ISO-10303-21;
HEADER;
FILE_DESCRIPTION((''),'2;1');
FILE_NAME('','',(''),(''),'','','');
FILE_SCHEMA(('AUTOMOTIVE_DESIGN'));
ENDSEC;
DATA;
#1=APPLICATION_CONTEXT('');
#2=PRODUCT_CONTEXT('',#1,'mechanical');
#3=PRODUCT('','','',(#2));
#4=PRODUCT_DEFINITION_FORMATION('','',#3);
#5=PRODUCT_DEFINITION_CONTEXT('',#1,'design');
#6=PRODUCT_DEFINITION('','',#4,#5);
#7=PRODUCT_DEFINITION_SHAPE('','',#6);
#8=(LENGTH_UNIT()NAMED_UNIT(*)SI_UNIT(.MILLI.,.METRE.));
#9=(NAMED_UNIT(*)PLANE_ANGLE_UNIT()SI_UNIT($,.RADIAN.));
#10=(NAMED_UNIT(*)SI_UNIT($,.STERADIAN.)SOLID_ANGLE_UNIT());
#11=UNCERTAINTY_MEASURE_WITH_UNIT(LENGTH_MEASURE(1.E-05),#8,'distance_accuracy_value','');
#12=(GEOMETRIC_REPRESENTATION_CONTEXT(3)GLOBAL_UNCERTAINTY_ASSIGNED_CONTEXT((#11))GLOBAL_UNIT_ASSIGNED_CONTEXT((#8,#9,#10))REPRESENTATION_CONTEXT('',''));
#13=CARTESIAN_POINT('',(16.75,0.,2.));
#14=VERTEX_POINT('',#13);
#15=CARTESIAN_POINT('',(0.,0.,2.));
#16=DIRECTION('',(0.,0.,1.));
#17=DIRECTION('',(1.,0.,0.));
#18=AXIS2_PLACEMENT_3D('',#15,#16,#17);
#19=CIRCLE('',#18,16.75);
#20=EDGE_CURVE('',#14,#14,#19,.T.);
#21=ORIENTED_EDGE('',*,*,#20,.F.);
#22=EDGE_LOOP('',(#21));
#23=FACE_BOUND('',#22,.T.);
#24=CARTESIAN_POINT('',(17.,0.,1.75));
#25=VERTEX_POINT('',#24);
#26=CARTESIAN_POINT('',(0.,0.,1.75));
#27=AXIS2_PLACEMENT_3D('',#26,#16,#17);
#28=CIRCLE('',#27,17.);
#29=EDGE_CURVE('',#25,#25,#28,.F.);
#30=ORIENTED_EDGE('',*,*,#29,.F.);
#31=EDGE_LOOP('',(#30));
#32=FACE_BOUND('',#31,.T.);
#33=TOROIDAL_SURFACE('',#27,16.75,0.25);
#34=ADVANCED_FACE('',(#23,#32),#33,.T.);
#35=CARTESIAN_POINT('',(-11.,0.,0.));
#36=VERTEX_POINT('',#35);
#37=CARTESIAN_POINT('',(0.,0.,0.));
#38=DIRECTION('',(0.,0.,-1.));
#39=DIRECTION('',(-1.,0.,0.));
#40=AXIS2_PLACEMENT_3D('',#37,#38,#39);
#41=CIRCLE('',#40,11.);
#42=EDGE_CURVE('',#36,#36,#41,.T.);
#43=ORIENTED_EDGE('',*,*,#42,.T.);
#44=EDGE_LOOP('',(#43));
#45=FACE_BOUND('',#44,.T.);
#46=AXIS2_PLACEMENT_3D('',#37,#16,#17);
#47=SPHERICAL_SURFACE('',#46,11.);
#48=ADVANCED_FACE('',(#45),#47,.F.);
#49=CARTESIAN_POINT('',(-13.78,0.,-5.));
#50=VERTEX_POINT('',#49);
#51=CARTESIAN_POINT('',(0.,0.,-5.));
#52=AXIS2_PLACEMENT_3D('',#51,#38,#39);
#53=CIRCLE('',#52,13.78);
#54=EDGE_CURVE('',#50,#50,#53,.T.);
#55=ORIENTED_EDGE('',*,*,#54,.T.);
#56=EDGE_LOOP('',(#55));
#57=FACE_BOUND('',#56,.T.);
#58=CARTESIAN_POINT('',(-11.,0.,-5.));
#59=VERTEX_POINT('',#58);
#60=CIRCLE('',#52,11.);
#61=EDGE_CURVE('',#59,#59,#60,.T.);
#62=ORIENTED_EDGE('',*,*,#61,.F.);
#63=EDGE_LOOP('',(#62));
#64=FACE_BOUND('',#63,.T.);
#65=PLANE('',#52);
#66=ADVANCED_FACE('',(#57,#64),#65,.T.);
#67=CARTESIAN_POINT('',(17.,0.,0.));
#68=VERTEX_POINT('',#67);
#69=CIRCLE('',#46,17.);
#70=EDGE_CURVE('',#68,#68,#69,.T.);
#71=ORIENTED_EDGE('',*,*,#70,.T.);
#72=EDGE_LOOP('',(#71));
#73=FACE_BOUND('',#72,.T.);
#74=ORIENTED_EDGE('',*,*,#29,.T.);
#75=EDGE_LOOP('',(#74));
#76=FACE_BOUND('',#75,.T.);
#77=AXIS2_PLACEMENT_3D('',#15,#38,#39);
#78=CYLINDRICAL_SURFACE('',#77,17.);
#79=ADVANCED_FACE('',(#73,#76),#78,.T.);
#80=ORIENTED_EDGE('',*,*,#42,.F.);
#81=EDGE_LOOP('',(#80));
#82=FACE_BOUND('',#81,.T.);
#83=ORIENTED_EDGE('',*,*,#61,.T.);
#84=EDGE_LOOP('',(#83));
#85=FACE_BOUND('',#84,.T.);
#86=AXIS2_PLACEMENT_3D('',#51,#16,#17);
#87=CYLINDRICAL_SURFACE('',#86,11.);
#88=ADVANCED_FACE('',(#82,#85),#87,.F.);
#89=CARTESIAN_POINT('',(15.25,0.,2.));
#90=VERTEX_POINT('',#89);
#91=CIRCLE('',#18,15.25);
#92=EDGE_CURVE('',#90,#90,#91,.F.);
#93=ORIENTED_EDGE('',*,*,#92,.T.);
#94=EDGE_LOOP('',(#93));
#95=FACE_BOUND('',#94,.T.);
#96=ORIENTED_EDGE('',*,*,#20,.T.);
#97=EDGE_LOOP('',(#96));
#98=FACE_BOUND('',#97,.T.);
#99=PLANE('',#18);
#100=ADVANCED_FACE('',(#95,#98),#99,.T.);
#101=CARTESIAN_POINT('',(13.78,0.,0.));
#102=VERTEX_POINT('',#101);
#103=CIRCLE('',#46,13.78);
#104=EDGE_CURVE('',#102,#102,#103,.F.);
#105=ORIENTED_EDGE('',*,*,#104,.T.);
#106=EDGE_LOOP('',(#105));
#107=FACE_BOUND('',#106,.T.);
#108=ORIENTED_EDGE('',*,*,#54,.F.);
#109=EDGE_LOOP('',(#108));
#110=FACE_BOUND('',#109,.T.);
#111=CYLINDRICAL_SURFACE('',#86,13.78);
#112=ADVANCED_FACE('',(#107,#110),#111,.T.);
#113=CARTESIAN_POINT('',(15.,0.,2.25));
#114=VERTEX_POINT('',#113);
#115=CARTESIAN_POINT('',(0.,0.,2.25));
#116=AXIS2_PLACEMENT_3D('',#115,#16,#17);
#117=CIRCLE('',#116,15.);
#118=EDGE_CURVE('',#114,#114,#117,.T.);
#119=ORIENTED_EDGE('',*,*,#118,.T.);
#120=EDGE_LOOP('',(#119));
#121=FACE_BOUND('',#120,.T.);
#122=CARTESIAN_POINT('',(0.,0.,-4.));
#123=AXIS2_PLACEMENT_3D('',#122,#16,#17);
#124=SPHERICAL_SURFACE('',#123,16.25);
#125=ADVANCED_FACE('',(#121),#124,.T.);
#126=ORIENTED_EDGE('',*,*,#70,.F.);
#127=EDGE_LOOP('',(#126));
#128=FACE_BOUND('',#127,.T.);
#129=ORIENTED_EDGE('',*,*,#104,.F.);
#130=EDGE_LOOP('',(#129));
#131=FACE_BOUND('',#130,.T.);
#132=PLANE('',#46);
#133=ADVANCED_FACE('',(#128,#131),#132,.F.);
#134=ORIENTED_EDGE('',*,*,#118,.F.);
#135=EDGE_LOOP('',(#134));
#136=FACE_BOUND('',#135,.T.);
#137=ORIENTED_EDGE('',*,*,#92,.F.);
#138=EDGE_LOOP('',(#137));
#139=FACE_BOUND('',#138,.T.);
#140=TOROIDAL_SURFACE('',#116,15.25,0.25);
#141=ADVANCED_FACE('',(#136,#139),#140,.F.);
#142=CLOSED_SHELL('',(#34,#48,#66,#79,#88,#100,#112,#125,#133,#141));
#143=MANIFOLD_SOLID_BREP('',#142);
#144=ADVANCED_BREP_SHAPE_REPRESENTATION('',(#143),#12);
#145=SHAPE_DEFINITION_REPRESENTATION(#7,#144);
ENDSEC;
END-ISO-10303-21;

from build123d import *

# Parameters (mm, degrees)
ESQUISSE1_R        = 17
BOSS_EXTRU_1_DEPTH = 2
ESQUISSE2_R        = 13.78
ESQUISSE2_R_2      = 11
BOSS_EXTRU_2_DEPTH = 5
ESQUISSE3_R        = 15
BOSS_EXTRU_3_DEPTH = 0.25
D_ME1_FACE_RADIUS  = 15
D_ME1_HEIGHT       = 10
D_ME2_FACE_RADIUS  = 11
D_ME2_HEIGHT       = 11
CONG_1_R           = 0.25


with BuildPart() as part:
    # Esquisse1 → Boss.-Extru.1 (new body)
    with BuildSketch(Plane.XY):
        Circle(ESQUISSE1_R)
    extrude(amount=BOSS_EXTRU_1_DEPTH)

    # Esquisse2 → Boss.-Extru.2 (add)
    with BuildSketch(Plane(origin=(0, 0, 0), x_dir=(-1, 0, 0), z_dir=(0, 0, -1))):
        with Locations(Location((0, 0, 0), (0, 0, 180))):
            Circle(ESQUISSE2_R)
        Circle(ESQUISSE2_R_2, mode=Mode.SUBTRACT)
    extrude(amount=BOSS_EXTRU_2_DEPTH)

    # Esquisse3 → Boss.-Extru.3 (add)
    with BuildSketch(Plane.XY.offset(2)):
        Circle(ESQUISSE3_R)
    extrude(amount=BOSS_EXTRU_3_DEPTH)

    # Dôme1: a dome of height H over a round flat face of radius A is a cap of a sphere of radius (A * A + H * H) / (2 * H)
    d_me1_r = (D_ME1_FACE_RADIUS * D_ME1_FACE_RADIUS + D_ME1_HEIGHT * D_ME1_HEIGHT) / (2 * D_ME1_HEIGHT)
    d_me1_base = Plane((0, 0, 2.25), z_dir=(0, 0, 1))
    with Locations(d_me1_base.offset(D_ME1_HEIGHT - d_me1_r)):
        d_me1_ball = Sphere(d_me1_r, mode=Mode.PRIVATE)
    add(split(d_me1_ball, bisect_by=d_me1_base, keep=Keep.TOP, mode=Mode.PRIVATE))

    # Dôme2: a dome of height H over a round flat face of radius A is a cap of a sphere of radius (A * A + H * H) / (2 * H)
    d_me2_r = (D_ME2_FACE_RADIUS * D_ME2_FACE_RADIUS + D_ME2_HEIGHT * D_ME2_HEIGHT) / (2 * D_ME2_HEIGHT)
    d_me2_base = Plane((0, 0, 0), z_dir=(0, 0, 1))
    with Locations(d_me2_base.offset(D_ME2_HEIGHT - d_me2_r)):
        d_me2_ball = Sphere(d_me2_r, mode=Mode.PRIVATE)
    add(split(d_me2_ball, bisect_by=d_me2_base, keep=Keep.TOP, mode=Mode.PRIVATE), mode=Mode.SUBTRACT)

    # Congé1
    cong_1_edges = [part.edges().sort_by_distance(p)[0] for p in [
        (-15, 0, 2),
        (-17, 0, 2),
    ]]
    fillet(cong_1_edges, radius=CONG_1_R - 0.0001)  # a hair under: the kernel refuses the full size


solid = part.part
